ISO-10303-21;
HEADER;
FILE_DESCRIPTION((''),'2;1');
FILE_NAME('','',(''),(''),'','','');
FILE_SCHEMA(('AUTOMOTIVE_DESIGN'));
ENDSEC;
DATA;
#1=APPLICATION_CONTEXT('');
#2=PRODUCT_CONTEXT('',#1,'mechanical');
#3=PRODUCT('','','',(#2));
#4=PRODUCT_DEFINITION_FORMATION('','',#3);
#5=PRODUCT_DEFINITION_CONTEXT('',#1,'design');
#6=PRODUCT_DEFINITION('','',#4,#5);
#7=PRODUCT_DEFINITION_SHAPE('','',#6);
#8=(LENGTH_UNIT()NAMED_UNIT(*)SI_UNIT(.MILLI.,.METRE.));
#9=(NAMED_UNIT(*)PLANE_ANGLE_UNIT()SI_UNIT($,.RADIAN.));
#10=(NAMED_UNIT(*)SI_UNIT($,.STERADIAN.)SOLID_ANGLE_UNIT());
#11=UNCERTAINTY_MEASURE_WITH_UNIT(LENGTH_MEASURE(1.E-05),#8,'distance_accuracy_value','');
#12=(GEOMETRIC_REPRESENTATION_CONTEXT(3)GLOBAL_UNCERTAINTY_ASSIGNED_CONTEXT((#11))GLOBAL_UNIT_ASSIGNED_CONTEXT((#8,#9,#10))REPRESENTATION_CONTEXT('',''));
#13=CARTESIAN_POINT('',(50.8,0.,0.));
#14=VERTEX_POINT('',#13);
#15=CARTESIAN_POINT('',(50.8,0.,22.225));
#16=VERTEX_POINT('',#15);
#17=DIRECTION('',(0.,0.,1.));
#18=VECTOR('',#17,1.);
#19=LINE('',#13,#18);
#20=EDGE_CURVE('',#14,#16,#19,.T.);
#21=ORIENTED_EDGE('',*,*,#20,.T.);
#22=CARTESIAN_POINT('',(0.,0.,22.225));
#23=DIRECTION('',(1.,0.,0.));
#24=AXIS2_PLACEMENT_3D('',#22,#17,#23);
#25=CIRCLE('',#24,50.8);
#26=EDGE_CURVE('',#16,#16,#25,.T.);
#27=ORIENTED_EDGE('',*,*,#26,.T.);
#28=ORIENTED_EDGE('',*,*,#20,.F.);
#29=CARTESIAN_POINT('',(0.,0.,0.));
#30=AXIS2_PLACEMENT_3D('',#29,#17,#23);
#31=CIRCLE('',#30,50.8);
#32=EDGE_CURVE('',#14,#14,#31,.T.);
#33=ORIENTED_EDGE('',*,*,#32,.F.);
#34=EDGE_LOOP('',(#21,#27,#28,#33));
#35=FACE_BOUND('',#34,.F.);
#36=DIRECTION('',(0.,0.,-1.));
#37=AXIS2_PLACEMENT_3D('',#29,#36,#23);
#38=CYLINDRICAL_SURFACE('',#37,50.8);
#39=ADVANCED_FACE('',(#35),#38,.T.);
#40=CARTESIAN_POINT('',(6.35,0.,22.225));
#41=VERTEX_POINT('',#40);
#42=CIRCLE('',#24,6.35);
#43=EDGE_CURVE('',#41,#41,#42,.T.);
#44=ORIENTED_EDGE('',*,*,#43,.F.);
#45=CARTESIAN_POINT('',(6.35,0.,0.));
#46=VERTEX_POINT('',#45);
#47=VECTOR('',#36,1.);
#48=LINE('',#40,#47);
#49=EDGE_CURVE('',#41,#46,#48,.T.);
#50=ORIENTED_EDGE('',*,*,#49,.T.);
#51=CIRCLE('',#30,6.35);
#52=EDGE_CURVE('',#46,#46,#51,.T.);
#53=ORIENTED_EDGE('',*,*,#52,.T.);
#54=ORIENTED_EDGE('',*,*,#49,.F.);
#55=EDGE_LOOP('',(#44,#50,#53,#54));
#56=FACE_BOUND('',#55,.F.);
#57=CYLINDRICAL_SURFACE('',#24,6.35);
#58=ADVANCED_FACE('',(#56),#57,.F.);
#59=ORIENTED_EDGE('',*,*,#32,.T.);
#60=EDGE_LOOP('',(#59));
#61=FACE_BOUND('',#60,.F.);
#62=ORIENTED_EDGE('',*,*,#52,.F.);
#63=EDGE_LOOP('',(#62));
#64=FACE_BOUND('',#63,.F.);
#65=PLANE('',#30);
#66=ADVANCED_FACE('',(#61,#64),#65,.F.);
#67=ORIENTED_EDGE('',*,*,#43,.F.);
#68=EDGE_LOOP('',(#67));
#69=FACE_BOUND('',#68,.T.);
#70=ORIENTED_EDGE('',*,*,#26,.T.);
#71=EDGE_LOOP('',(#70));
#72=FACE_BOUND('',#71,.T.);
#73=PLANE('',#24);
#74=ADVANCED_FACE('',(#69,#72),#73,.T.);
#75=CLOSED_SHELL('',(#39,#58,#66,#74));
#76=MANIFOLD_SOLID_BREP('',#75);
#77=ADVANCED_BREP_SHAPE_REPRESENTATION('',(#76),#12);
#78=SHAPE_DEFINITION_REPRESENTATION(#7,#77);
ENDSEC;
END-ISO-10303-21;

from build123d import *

# Parameters (mm, degrees)
F0_R     = 50.8
F1_DEPTH = 22.225
F2_R     = 6.35
F3_DEPTH = 22.225


# Not quite as in the source:
# - a length typed as a fraction of an inch, garbled in the dataset ("3 / 203.2 mm" for 3/8 in), is restored


with BuildPart() as f1:
    # F0 (on Top) → F1 (new body)
    with BuildSketch(Plane.XY):
        Circle(F0_R)
    extrude(amount=F1_DEPTH)

    # F2 (on face) → F3 (cut)
    with BuildSketch(Plane.XY.offset(22.225)):
        Circle(F2_R)
    extrude(amount=-F3_DEPTH, mode=Mode.SUBTRACT)


solid = f1.part
